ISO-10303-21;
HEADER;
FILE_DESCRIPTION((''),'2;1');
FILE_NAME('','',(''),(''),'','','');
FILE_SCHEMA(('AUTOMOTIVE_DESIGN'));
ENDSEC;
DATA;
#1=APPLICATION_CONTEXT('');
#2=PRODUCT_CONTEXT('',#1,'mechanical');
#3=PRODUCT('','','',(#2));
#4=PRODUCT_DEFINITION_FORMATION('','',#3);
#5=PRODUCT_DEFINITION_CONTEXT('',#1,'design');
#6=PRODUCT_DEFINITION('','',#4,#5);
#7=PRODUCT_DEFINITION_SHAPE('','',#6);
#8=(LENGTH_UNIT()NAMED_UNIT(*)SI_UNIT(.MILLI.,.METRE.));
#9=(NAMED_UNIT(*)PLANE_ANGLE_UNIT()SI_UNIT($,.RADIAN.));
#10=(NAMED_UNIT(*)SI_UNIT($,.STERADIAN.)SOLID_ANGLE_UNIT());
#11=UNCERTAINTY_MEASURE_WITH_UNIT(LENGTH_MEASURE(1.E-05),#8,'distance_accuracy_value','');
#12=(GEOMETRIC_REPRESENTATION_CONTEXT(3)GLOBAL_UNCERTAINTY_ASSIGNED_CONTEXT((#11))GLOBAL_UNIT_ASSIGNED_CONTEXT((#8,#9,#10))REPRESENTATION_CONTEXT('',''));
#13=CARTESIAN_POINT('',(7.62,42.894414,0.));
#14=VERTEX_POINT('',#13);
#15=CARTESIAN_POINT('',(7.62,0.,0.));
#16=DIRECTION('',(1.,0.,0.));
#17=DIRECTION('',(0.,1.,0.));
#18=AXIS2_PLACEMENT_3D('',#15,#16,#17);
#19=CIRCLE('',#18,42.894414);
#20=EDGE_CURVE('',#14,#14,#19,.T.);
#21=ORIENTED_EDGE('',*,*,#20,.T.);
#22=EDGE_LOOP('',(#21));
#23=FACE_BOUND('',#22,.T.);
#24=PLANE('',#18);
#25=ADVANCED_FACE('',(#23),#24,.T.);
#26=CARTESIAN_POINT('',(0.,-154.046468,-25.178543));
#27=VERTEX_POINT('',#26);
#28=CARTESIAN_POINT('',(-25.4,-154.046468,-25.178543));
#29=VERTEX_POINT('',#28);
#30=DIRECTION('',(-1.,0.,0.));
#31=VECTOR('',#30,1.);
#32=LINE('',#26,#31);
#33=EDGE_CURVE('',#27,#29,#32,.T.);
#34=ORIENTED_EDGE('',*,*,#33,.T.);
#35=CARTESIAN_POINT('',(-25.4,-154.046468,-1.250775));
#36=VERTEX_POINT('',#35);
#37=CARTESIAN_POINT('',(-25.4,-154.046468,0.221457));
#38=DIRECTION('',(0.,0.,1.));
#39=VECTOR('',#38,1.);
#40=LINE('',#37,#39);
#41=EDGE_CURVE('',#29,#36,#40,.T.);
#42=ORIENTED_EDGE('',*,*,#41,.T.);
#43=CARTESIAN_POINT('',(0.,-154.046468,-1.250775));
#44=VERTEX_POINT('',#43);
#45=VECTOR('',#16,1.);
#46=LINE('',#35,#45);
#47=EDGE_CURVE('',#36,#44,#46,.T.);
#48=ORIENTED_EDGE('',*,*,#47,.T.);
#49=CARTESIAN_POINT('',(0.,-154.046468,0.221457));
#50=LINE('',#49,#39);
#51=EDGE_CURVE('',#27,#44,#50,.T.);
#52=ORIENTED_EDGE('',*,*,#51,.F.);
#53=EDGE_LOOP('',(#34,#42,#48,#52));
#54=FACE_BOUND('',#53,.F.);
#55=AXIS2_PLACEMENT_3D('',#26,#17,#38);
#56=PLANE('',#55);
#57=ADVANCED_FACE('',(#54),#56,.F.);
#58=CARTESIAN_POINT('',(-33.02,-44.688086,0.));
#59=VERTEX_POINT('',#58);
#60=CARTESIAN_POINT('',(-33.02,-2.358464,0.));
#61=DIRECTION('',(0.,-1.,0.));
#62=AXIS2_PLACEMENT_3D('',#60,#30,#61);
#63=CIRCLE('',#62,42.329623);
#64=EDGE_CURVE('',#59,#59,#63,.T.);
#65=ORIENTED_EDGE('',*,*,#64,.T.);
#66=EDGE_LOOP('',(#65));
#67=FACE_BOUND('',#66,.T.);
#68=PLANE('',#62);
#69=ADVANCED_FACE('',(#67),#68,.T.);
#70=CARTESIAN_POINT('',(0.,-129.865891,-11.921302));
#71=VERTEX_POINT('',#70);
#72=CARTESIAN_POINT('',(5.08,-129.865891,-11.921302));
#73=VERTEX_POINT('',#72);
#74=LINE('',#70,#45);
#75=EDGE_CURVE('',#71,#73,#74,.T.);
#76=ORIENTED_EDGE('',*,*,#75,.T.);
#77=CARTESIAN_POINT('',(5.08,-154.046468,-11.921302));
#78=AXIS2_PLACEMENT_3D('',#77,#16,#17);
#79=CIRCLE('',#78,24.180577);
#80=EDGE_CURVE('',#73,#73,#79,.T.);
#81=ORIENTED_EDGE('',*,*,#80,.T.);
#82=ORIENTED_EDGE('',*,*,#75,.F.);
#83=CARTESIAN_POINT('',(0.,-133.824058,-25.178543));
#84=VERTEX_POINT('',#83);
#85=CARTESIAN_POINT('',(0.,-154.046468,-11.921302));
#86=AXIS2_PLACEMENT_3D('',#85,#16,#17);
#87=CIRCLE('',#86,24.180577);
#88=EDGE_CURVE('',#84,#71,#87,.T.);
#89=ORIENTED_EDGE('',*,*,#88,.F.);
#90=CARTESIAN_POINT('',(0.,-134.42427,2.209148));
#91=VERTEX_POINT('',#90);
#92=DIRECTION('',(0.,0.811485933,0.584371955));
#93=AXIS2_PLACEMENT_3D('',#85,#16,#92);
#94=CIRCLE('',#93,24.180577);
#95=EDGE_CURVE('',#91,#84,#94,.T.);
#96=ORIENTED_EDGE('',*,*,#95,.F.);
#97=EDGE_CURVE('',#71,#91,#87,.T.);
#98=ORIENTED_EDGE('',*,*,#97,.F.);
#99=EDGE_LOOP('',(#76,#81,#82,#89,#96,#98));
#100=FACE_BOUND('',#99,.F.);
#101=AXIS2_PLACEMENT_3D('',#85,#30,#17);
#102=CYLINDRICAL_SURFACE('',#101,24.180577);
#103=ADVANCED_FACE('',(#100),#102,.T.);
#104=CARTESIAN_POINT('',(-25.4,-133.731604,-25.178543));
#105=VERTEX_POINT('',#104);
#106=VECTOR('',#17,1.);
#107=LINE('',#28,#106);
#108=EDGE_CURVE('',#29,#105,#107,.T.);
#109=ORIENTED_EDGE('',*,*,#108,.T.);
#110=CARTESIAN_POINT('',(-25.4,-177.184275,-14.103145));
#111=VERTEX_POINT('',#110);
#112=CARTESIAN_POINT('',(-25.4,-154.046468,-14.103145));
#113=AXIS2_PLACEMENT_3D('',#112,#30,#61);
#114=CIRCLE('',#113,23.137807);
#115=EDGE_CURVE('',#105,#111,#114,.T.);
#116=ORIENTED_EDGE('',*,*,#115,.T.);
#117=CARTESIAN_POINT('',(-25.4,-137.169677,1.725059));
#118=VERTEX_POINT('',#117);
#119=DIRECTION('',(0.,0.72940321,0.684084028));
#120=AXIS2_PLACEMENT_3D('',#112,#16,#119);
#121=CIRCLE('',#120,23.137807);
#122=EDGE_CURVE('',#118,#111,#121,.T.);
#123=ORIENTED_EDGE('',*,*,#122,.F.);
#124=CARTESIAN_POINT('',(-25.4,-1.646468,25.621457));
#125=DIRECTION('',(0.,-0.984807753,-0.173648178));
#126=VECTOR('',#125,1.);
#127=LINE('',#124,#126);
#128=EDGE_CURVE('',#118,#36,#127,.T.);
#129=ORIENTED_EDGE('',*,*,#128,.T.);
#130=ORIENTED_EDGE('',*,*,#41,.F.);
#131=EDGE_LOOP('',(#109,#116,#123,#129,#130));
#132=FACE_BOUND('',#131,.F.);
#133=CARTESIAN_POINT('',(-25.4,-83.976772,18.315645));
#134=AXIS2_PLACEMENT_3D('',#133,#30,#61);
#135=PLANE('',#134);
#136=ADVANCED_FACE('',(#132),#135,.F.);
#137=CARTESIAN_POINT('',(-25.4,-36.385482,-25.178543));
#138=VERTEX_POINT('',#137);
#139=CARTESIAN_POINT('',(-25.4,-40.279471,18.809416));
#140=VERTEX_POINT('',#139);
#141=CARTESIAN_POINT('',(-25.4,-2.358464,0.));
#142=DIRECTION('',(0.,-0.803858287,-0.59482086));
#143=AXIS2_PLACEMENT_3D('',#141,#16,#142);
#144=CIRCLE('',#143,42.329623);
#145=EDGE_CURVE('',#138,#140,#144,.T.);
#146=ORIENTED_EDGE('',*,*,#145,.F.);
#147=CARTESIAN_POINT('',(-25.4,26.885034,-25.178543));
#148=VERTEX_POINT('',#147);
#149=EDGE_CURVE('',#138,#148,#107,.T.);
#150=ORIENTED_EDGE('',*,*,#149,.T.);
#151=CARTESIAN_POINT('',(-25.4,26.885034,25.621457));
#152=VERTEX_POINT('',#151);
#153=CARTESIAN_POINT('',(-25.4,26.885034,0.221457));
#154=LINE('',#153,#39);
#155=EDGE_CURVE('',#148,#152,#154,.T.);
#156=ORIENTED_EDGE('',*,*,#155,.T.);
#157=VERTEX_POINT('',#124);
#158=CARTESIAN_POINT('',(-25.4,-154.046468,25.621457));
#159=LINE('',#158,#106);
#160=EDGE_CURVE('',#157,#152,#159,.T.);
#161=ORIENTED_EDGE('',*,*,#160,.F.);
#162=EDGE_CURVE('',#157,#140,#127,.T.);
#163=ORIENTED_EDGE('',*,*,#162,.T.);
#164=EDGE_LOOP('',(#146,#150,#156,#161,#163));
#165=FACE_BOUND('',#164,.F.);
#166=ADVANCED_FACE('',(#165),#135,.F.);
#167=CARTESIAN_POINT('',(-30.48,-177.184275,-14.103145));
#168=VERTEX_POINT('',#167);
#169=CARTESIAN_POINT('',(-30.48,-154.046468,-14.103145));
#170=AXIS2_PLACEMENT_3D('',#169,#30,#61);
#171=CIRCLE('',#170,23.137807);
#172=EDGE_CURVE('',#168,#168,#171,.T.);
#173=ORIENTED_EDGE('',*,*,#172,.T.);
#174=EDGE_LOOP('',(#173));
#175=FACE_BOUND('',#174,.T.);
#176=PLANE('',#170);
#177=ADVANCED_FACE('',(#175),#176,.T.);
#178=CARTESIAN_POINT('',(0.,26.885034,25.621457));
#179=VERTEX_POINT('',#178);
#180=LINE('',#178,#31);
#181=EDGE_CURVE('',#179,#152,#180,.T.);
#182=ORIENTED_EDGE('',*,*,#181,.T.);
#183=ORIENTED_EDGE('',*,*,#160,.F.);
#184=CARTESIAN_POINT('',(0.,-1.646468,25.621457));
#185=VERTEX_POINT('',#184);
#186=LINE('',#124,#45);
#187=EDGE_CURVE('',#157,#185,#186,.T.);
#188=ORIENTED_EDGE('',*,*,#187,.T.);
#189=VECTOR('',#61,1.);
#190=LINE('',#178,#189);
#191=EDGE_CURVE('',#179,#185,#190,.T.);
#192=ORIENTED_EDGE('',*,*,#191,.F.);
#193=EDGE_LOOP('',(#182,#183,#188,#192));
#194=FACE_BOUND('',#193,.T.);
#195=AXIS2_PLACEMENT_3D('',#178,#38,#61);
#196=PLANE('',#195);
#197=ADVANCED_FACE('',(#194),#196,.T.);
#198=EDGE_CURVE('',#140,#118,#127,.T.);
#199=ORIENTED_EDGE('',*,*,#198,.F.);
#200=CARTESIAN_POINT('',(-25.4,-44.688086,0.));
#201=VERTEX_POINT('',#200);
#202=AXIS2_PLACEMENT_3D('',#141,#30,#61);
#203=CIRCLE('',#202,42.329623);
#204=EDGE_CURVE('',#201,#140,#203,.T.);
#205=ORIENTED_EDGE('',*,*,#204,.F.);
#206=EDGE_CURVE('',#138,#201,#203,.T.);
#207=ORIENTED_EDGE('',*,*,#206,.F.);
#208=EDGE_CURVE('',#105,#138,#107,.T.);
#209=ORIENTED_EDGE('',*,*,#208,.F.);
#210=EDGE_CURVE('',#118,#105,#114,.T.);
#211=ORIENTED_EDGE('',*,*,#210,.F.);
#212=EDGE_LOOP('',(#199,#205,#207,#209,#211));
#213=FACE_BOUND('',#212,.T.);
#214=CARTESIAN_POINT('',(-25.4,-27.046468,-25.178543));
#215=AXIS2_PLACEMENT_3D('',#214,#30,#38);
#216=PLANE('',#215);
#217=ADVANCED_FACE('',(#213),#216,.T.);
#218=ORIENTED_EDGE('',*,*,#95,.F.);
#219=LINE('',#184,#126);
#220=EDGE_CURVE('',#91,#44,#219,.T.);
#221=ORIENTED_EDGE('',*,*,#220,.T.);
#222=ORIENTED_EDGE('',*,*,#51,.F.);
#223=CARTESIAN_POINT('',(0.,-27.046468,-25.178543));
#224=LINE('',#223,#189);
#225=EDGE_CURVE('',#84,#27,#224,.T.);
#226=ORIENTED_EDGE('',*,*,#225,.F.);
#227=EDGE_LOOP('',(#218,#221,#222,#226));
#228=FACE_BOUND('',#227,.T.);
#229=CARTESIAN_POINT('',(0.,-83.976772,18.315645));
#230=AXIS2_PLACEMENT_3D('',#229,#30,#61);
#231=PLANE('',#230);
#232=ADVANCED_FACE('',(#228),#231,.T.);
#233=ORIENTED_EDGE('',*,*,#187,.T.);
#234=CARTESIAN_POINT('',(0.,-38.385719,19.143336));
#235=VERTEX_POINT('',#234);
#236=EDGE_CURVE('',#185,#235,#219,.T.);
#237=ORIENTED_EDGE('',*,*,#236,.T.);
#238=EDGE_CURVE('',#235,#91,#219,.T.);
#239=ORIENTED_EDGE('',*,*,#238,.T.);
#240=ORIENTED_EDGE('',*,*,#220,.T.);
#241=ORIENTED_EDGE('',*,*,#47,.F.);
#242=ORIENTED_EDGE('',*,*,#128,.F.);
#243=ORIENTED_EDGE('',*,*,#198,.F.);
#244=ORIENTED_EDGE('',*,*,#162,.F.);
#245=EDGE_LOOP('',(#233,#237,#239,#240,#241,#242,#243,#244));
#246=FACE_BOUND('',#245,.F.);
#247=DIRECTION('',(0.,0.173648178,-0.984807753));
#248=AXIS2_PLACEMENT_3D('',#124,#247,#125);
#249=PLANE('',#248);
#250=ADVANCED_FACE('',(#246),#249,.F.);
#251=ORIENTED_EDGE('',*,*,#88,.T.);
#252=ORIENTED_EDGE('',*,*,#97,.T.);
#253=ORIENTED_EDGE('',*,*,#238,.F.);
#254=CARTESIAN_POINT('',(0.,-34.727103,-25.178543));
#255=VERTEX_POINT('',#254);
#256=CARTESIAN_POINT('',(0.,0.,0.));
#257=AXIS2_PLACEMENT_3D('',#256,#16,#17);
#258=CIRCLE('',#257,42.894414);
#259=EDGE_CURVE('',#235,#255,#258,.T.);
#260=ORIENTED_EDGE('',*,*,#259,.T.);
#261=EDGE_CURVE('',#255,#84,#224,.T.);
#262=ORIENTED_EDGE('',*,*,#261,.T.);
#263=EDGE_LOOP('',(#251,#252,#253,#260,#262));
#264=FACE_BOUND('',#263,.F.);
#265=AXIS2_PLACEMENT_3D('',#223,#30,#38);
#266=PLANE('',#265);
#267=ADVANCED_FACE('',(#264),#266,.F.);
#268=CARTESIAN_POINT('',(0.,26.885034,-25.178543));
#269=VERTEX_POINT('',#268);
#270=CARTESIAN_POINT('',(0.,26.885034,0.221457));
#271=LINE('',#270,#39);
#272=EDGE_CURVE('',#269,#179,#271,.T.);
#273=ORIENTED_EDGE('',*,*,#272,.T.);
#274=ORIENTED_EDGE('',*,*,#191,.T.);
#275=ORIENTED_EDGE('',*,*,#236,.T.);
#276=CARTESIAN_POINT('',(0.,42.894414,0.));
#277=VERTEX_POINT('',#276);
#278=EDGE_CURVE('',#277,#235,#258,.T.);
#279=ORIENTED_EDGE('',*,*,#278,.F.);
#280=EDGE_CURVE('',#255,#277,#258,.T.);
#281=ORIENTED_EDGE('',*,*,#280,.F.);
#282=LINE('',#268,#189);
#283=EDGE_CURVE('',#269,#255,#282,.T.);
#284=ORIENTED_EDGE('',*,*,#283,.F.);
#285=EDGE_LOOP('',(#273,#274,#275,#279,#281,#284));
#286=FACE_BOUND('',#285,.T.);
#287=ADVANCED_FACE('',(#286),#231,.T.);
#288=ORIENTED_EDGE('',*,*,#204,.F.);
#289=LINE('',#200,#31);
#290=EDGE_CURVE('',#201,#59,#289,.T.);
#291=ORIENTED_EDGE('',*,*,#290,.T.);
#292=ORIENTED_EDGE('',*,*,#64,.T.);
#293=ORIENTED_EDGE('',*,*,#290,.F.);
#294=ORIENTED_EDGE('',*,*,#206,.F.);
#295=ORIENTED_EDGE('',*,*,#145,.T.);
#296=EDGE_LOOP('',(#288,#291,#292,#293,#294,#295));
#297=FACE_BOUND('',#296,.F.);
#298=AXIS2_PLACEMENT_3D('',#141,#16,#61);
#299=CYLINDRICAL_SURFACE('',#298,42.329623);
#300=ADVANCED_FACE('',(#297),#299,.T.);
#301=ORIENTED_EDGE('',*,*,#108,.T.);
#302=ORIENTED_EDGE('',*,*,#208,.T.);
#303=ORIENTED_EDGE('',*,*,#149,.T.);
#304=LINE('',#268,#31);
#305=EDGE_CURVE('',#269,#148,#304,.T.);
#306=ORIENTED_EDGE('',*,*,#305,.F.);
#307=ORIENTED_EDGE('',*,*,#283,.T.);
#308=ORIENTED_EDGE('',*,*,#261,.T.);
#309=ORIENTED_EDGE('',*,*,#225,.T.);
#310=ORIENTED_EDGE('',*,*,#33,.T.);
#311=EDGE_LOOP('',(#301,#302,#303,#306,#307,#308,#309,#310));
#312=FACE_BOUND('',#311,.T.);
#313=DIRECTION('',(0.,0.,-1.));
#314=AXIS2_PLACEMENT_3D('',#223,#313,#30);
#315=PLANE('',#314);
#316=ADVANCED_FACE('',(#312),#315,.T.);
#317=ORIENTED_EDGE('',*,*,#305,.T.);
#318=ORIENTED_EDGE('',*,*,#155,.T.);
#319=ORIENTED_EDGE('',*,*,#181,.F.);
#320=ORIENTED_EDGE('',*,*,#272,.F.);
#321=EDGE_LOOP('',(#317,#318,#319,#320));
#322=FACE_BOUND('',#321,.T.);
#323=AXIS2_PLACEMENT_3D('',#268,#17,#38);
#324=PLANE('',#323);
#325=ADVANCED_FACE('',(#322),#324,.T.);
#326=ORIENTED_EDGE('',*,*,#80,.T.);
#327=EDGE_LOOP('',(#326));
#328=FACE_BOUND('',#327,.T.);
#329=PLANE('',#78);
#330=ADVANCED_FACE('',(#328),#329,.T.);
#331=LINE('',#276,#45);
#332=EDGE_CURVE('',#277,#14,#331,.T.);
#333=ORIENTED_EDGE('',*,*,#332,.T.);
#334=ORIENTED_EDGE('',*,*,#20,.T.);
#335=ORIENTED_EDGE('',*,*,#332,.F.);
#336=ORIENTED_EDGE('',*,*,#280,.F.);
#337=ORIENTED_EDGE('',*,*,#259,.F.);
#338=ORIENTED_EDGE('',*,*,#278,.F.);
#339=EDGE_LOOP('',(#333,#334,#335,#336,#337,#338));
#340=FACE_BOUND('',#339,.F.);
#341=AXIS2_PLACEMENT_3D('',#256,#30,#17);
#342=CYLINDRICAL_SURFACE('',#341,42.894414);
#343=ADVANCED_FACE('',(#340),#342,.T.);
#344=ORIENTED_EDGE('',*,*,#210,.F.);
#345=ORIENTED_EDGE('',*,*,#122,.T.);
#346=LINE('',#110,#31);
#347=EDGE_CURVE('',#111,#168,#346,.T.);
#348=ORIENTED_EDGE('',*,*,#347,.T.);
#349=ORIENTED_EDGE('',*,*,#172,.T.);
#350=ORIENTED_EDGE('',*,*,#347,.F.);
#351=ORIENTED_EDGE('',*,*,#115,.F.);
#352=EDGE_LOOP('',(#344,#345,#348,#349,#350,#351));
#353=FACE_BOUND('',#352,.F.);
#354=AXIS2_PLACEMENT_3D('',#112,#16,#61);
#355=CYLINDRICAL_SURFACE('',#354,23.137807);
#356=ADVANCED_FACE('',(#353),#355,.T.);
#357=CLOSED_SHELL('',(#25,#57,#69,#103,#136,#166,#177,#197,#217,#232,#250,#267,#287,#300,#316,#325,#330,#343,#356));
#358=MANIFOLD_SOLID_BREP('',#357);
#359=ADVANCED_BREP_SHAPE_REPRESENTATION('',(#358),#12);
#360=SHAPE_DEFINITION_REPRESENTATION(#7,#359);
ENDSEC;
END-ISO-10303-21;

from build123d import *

# Parameters (mm, degrees)
F0_R         = 42.8944136966
F1_DEPTH     = 7.62
F2_W         = 53.9315019637
F2_H         = 50.8
F3_DEPTH     = 25.4
F4_DEPTH     = 127
F5_R         = 42.3296228718
F6_DEPTH     = 7.62
F7_R         = 23.1378072787
F8_DEPTH     = 5.08
F9_R         = 24.1805765137
F10_DEPTH    = 5.08
F11_T1_DEPTH = 25.4


# Not quite as in the source:
# - a fillet or chamfer that OpenCascade refuses, or shapes differently, is made with other operations: its cross-section is extruded or revolved along the edge and cut away or added


with BuildPart() as f1:
    # F0 (on Right) → F1 (new body)
    with BuildSketch(Plane.YZ):
        Circle(F0_R)
    extrude(amount=F1_DEPTH)

    # F2 (on face) → F3 (join)
    with BuildSketch(Plane(origin=(0, 0, 0), x_dir=(0, -1, 0), z_dir=(-1, 0, 0))):
        with Locations((0.0807167962, 0.2214573324)):
            Rectangle(F2_W, F2_H)
    extrude(amount=F3_DEPTH)

    # F4 (add): a face of the model
    f4_faces = [f1.faces().sort_by_distance(p)[0] for p in [
        (-12.7, -27.0464677781, 0.2214573324),
    ]]
    extrude(f4_faces, amount=F4_DEPTH)

    # F5 (on face) → F6 (join)
    with BuildSketch(Plane(origin=(-25.4, 0, 0), x_dir=(0, -1, 0), z_dir=(-1, 0, 0))):
        with Locations((2.3584635928, 0)):
            Circle(F5_R)
    extrude(amount=F6_DEPTH)

    # F7 (on face) → F8 (join)
    with BuildSketch(Plane(origin=(-25.4, 0, 0), x_dir=(0, -1, 0), z_dir=(-1, 0, 0))):
        with Locations((154.0464677781, -14.1031453386)):
            Circle(F7_R)
    extrude(amount=F8_DEPTH)

    # F9 (on face) → F10 (join)
    with BuildSketch(Plane.YZ):
        with Locations((-154.0464677781, -11.9213024154)):
            Circle(F9_R)
    extrude(amount=F10_DEPTH)

    # F11: chamfer of 152.4 x 26.87223186 on 1 edges, made by hand

    # F11_s2 → F11_t1 (cut)
    with BuildSketch(Plane.YZ.offset(-25.4)):
        Polygon((-1.6464677781, 25.6214573324), (-154.0464677781, -1.2507745276), (-154.0464677781, 25.6214573324), align=None)
    extrude(amount=F11_T1_DEPTH, mode=Mode.SUBTRACT)


solid = f1.part
